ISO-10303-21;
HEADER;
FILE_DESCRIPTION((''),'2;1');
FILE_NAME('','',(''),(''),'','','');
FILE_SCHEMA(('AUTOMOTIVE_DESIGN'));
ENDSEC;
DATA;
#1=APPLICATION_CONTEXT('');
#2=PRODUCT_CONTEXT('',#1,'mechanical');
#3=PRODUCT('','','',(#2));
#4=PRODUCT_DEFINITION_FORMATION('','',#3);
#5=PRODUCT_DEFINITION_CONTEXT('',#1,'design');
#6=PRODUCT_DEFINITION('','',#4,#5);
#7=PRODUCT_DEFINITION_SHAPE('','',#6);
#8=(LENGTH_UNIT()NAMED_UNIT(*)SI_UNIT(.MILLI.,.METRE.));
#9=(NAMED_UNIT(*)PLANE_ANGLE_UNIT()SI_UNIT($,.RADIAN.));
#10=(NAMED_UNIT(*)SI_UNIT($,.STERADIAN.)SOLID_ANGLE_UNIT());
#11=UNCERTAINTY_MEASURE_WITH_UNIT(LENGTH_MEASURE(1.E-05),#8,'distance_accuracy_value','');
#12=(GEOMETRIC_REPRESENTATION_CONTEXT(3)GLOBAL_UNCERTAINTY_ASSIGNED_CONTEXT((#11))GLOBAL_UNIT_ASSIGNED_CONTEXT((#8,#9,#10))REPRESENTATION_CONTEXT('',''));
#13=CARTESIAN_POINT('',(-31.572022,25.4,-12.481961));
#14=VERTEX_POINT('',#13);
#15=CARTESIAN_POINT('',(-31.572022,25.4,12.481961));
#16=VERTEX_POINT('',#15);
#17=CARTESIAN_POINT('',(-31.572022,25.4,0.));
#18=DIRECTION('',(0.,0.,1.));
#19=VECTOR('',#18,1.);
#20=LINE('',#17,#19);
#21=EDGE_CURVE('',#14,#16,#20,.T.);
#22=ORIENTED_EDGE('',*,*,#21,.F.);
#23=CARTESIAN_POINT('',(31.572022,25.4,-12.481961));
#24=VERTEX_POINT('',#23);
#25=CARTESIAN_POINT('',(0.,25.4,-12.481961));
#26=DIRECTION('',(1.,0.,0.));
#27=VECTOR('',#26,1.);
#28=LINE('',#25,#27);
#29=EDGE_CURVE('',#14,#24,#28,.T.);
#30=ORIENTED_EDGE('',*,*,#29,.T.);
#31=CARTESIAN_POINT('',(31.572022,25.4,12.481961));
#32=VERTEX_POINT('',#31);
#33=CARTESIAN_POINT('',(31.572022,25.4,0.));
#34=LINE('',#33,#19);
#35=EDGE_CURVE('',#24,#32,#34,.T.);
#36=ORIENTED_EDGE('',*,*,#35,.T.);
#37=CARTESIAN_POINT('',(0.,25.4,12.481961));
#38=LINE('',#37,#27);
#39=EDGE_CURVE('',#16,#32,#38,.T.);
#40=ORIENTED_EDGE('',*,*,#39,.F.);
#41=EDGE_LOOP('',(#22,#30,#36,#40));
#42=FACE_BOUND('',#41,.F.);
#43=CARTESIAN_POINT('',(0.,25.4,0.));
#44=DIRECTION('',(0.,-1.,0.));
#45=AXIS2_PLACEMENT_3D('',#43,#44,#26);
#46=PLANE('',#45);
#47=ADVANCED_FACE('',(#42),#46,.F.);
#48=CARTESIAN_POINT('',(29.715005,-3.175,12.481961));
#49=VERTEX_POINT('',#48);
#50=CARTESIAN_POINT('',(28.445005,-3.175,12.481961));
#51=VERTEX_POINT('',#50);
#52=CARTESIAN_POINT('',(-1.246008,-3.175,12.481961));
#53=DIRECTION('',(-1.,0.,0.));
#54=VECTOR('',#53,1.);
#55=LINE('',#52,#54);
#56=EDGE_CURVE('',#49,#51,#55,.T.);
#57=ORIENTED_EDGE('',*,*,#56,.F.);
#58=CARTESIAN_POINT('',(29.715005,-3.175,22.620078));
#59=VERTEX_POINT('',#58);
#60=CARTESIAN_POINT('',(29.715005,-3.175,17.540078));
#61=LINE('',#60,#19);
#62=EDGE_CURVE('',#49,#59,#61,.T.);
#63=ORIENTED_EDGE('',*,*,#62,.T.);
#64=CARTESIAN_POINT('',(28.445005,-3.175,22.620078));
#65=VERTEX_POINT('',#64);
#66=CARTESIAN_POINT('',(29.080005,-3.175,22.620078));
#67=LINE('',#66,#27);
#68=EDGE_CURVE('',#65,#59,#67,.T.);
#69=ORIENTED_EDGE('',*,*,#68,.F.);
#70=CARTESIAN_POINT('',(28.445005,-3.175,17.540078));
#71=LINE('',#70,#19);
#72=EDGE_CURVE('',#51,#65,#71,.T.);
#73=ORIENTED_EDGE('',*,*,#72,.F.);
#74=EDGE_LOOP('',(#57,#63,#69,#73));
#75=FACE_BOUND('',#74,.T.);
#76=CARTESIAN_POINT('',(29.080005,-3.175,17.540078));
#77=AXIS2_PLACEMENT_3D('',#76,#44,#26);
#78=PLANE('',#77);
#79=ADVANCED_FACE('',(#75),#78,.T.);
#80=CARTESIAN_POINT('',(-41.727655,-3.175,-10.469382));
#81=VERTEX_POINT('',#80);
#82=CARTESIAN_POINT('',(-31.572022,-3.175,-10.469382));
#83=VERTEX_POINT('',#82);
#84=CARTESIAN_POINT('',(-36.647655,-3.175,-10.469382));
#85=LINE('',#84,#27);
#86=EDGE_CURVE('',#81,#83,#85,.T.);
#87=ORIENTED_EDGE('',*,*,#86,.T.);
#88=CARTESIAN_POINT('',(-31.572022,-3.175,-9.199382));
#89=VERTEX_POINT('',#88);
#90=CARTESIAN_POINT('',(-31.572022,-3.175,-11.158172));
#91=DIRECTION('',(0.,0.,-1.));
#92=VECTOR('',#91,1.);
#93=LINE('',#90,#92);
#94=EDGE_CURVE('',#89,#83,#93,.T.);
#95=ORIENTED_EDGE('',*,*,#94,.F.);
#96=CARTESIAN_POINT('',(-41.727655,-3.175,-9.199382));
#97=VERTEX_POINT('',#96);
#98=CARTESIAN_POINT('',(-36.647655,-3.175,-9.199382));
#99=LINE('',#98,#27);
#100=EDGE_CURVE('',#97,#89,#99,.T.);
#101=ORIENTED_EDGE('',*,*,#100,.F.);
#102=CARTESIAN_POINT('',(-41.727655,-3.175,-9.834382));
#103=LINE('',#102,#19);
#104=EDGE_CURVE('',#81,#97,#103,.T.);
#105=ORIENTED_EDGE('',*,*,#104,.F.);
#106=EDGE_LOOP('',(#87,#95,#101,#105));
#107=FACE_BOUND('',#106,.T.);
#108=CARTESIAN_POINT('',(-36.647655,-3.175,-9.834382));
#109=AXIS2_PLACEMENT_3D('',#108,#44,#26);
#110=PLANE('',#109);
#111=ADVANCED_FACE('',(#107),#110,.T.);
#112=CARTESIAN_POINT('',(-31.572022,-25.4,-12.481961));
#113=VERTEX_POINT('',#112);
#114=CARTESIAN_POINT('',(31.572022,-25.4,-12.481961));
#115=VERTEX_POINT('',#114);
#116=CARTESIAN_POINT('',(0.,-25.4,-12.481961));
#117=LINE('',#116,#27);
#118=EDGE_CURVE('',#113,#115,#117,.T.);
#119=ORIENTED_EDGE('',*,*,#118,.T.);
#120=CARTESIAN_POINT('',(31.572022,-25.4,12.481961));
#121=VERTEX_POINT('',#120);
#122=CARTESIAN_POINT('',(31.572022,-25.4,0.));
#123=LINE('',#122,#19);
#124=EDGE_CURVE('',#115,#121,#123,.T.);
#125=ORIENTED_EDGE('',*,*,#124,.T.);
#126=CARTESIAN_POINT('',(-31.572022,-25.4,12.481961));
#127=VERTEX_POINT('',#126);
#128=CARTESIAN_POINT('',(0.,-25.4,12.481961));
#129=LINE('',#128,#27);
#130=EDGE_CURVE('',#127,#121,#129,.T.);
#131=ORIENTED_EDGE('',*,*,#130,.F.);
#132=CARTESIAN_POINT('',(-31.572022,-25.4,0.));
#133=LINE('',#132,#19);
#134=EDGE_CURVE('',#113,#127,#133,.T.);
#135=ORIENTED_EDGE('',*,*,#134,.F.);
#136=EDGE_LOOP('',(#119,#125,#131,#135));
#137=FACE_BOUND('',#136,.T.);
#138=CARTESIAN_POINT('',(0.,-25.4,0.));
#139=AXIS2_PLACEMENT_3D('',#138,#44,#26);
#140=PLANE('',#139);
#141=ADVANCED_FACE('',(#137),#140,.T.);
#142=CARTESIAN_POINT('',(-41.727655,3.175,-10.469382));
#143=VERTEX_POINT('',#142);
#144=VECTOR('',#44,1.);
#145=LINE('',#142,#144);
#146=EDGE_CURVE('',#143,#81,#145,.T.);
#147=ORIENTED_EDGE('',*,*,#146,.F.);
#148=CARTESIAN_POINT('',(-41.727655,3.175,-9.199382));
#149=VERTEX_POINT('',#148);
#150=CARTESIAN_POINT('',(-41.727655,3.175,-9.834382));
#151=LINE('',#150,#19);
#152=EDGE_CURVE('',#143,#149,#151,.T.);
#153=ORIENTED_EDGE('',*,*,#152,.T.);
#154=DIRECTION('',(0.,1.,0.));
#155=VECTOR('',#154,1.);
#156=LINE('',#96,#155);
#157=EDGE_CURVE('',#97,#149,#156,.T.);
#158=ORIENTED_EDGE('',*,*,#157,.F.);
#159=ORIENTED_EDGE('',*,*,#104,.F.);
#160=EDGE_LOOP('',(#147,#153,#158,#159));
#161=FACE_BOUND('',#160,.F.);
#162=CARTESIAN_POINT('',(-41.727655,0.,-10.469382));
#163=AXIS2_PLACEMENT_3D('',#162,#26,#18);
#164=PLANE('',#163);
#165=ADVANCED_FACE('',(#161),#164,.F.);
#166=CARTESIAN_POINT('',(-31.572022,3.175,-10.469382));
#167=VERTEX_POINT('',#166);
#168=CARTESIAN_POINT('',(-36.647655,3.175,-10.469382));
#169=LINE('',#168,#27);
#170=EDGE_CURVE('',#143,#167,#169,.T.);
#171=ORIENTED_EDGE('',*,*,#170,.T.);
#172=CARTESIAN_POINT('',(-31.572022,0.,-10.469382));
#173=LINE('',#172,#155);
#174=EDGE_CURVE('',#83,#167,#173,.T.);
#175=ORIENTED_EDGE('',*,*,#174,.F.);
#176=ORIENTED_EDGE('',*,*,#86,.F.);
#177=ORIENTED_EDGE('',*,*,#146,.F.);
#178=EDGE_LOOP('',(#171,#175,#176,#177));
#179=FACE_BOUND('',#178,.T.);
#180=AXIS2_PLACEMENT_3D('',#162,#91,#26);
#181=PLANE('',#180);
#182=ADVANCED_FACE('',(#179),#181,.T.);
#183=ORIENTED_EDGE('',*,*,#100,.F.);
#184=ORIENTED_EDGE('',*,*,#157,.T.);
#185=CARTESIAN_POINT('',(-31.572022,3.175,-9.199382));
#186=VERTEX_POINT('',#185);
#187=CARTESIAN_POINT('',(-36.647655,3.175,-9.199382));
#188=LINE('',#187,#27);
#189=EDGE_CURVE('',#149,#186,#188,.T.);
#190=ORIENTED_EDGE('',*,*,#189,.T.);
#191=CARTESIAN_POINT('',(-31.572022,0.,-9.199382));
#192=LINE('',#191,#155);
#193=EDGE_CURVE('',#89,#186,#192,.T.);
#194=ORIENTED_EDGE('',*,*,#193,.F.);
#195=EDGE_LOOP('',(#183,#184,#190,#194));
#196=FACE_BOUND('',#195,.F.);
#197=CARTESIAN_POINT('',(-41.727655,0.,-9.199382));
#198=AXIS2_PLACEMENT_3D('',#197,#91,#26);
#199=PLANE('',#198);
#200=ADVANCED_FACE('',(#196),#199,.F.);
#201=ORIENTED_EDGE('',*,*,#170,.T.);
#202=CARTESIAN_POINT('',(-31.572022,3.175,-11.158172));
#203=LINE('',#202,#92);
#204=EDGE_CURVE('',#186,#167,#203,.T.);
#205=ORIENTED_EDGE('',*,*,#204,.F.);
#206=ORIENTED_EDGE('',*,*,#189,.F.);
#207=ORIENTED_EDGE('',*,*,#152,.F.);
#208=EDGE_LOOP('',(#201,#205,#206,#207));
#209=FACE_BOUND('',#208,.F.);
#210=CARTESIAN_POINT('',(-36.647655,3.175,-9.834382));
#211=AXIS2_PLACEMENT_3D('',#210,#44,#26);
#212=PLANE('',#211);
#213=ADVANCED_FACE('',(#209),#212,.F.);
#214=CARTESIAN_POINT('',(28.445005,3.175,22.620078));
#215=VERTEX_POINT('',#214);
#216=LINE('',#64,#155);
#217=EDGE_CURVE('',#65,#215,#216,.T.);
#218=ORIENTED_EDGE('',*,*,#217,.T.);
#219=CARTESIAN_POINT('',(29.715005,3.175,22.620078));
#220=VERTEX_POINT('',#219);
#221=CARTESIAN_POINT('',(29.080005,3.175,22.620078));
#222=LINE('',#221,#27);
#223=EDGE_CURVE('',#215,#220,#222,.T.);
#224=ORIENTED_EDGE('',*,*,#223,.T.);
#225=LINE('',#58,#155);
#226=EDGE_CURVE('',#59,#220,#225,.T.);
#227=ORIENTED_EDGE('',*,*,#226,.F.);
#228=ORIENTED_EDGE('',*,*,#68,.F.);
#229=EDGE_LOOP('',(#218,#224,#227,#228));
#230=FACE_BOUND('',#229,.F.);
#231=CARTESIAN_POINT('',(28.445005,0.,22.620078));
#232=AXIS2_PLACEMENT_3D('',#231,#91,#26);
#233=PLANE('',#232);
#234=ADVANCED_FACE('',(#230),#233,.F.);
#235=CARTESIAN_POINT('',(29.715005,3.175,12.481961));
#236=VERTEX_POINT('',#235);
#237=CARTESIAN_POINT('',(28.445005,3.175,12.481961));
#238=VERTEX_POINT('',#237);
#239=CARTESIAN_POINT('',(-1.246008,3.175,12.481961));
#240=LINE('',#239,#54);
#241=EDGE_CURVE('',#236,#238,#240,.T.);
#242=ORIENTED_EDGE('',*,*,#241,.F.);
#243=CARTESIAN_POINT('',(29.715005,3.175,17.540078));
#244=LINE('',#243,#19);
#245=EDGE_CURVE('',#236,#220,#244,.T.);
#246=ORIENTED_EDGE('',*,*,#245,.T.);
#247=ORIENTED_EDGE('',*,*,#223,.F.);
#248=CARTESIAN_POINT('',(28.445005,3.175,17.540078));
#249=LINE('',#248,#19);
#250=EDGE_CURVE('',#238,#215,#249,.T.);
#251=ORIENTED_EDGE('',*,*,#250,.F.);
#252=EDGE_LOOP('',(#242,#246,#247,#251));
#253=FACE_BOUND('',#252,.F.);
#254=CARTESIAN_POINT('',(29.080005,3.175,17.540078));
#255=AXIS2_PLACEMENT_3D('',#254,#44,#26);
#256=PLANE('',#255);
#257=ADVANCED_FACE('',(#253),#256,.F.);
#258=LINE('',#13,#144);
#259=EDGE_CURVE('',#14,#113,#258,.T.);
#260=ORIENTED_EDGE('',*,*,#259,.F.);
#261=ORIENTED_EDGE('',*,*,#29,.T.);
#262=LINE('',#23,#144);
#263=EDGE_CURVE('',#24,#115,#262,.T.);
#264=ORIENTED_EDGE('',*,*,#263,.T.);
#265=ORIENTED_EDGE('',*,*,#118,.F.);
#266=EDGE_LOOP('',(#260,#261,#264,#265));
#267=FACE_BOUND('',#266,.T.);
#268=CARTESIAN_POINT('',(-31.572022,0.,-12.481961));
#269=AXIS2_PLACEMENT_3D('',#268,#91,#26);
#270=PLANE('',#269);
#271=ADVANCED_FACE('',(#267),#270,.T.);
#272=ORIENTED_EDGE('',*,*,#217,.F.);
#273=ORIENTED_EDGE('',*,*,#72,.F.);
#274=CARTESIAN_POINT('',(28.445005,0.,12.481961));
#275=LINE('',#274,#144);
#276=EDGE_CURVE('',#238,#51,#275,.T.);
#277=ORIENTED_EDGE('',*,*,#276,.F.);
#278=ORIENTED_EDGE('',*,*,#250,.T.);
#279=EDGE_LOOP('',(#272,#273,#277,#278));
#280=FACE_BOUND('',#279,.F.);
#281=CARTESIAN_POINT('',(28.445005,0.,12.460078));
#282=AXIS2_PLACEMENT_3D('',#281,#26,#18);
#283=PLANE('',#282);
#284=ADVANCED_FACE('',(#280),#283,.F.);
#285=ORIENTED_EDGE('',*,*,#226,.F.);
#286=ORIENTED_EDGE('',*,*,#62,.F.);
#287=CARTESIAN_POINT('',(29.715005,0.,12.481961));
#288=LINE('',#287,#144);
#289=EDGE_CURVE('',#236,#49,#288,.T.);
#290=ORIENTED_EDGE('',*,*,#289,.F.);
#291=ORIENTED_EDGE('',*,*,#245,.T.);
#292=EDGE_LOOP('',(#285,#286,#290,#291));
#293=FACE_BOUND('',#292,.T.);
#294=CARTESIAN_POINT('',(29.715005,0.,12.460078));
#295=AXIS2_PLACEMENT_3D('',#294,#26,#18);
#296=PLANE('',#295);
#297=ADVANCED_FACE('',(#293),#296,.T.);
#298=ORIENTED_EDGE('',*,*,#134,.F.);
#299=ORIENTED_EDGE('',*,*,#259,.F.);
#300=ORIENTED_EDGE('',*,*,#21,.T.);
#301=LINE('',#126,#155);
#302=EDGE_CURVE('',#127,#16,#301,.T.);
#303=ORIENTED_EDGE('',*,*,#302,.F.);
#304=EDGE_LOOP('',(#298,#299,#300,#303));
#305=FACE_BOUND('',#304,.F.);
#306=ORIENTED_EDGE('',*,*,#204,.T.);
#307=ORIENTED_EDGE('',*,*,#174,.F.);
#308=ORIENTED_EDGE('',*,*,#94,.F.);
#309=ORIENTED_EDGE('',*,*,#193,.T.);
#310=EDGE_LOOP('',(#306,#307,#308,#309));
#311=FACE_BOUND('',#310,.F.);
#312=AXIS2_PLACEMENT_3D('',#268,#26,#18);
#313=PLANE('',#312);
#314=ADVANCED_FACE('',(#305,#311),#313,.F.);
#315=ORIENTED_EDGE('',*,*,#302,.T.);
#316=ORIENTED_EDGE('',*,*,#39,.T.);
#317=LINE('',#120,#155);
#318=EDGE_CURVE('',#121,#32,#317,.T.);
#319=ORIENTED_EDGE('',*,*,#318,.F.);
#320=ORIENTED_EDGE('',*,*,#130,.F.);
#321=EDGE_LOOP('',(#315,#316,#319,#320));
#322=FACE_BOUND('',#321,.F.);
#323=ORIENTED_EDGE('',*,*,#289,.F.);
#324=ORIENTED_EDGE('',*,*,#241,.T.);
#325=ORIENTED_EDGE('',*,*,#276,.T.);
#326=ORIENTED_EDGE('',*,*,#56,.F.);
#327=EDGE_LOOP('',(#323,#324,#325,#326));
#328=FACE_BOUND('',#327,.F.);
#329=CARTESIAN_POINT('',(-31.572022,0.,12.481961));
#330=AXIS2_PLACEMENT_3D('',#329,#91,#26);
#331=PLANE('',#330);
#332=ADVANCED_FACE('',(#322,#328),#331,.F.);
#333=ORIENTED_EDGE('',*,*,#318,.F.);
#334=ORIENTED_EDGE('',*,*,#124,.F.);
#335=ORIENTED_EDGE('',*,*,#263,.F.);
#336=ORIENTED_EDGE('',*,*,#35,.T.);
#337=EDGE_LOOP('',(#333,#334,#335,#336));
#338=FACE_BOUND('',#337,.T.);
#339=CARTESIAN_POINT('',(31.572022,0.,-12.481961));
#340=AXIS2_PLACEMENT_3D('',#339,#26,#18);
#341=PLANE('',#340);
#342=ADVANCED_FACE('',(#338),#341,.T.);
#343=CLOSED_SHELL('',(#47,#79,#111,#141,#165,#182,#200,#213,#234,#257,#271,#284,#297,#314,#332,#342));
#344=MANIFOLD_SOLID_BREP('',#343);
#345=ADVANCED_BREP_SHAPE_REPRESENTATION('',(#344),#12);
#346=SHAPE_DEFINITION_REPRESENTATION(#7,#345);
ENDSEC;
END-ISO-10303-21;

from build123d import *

# Parameters (mm, degrees)
F0_W     = 63.144043088
F0_H     = 24.9639227986
F1_DEPTH = 25.4
F2_W     = 1.27
F2_H     = 10.16
F3_DEPTH = 3.175
F4_W     = 10.16
F4_H     = 1.27
F5_DEPTH = 3.175


# Not quite as in the source:
# - a feature names something its author has since deleted; it is built from what else it names


with BuildPart() as f1:
    # F0 (on Front) → F1 (new body, symmetric)
    with BuildSketch(Plane.XZ):
        Rectangle(F0_W, F0_H)
    extrude(amount=F1_DEPTH, both=True)

    # F2 (on Front) → F3 (join, symmetric)
    with BuildSketch(Plane.XZ):
        with Locations((29.0800049829, 17.5400783525)):
            Rectangle(F2_W, F2_H)
    extrude(amount=F3_DEPTH, both=True)

    # F4 (on Front) → F5 (join, symmetric)
    with BuildSketch(Plane.XZ):
        with Locations((-36.6476550698, -9.8343824477)):
            Rectangle(F4_W, F4_H)
    extrude(amount=F5_DEPTH, both=True)


solid = f1.part
